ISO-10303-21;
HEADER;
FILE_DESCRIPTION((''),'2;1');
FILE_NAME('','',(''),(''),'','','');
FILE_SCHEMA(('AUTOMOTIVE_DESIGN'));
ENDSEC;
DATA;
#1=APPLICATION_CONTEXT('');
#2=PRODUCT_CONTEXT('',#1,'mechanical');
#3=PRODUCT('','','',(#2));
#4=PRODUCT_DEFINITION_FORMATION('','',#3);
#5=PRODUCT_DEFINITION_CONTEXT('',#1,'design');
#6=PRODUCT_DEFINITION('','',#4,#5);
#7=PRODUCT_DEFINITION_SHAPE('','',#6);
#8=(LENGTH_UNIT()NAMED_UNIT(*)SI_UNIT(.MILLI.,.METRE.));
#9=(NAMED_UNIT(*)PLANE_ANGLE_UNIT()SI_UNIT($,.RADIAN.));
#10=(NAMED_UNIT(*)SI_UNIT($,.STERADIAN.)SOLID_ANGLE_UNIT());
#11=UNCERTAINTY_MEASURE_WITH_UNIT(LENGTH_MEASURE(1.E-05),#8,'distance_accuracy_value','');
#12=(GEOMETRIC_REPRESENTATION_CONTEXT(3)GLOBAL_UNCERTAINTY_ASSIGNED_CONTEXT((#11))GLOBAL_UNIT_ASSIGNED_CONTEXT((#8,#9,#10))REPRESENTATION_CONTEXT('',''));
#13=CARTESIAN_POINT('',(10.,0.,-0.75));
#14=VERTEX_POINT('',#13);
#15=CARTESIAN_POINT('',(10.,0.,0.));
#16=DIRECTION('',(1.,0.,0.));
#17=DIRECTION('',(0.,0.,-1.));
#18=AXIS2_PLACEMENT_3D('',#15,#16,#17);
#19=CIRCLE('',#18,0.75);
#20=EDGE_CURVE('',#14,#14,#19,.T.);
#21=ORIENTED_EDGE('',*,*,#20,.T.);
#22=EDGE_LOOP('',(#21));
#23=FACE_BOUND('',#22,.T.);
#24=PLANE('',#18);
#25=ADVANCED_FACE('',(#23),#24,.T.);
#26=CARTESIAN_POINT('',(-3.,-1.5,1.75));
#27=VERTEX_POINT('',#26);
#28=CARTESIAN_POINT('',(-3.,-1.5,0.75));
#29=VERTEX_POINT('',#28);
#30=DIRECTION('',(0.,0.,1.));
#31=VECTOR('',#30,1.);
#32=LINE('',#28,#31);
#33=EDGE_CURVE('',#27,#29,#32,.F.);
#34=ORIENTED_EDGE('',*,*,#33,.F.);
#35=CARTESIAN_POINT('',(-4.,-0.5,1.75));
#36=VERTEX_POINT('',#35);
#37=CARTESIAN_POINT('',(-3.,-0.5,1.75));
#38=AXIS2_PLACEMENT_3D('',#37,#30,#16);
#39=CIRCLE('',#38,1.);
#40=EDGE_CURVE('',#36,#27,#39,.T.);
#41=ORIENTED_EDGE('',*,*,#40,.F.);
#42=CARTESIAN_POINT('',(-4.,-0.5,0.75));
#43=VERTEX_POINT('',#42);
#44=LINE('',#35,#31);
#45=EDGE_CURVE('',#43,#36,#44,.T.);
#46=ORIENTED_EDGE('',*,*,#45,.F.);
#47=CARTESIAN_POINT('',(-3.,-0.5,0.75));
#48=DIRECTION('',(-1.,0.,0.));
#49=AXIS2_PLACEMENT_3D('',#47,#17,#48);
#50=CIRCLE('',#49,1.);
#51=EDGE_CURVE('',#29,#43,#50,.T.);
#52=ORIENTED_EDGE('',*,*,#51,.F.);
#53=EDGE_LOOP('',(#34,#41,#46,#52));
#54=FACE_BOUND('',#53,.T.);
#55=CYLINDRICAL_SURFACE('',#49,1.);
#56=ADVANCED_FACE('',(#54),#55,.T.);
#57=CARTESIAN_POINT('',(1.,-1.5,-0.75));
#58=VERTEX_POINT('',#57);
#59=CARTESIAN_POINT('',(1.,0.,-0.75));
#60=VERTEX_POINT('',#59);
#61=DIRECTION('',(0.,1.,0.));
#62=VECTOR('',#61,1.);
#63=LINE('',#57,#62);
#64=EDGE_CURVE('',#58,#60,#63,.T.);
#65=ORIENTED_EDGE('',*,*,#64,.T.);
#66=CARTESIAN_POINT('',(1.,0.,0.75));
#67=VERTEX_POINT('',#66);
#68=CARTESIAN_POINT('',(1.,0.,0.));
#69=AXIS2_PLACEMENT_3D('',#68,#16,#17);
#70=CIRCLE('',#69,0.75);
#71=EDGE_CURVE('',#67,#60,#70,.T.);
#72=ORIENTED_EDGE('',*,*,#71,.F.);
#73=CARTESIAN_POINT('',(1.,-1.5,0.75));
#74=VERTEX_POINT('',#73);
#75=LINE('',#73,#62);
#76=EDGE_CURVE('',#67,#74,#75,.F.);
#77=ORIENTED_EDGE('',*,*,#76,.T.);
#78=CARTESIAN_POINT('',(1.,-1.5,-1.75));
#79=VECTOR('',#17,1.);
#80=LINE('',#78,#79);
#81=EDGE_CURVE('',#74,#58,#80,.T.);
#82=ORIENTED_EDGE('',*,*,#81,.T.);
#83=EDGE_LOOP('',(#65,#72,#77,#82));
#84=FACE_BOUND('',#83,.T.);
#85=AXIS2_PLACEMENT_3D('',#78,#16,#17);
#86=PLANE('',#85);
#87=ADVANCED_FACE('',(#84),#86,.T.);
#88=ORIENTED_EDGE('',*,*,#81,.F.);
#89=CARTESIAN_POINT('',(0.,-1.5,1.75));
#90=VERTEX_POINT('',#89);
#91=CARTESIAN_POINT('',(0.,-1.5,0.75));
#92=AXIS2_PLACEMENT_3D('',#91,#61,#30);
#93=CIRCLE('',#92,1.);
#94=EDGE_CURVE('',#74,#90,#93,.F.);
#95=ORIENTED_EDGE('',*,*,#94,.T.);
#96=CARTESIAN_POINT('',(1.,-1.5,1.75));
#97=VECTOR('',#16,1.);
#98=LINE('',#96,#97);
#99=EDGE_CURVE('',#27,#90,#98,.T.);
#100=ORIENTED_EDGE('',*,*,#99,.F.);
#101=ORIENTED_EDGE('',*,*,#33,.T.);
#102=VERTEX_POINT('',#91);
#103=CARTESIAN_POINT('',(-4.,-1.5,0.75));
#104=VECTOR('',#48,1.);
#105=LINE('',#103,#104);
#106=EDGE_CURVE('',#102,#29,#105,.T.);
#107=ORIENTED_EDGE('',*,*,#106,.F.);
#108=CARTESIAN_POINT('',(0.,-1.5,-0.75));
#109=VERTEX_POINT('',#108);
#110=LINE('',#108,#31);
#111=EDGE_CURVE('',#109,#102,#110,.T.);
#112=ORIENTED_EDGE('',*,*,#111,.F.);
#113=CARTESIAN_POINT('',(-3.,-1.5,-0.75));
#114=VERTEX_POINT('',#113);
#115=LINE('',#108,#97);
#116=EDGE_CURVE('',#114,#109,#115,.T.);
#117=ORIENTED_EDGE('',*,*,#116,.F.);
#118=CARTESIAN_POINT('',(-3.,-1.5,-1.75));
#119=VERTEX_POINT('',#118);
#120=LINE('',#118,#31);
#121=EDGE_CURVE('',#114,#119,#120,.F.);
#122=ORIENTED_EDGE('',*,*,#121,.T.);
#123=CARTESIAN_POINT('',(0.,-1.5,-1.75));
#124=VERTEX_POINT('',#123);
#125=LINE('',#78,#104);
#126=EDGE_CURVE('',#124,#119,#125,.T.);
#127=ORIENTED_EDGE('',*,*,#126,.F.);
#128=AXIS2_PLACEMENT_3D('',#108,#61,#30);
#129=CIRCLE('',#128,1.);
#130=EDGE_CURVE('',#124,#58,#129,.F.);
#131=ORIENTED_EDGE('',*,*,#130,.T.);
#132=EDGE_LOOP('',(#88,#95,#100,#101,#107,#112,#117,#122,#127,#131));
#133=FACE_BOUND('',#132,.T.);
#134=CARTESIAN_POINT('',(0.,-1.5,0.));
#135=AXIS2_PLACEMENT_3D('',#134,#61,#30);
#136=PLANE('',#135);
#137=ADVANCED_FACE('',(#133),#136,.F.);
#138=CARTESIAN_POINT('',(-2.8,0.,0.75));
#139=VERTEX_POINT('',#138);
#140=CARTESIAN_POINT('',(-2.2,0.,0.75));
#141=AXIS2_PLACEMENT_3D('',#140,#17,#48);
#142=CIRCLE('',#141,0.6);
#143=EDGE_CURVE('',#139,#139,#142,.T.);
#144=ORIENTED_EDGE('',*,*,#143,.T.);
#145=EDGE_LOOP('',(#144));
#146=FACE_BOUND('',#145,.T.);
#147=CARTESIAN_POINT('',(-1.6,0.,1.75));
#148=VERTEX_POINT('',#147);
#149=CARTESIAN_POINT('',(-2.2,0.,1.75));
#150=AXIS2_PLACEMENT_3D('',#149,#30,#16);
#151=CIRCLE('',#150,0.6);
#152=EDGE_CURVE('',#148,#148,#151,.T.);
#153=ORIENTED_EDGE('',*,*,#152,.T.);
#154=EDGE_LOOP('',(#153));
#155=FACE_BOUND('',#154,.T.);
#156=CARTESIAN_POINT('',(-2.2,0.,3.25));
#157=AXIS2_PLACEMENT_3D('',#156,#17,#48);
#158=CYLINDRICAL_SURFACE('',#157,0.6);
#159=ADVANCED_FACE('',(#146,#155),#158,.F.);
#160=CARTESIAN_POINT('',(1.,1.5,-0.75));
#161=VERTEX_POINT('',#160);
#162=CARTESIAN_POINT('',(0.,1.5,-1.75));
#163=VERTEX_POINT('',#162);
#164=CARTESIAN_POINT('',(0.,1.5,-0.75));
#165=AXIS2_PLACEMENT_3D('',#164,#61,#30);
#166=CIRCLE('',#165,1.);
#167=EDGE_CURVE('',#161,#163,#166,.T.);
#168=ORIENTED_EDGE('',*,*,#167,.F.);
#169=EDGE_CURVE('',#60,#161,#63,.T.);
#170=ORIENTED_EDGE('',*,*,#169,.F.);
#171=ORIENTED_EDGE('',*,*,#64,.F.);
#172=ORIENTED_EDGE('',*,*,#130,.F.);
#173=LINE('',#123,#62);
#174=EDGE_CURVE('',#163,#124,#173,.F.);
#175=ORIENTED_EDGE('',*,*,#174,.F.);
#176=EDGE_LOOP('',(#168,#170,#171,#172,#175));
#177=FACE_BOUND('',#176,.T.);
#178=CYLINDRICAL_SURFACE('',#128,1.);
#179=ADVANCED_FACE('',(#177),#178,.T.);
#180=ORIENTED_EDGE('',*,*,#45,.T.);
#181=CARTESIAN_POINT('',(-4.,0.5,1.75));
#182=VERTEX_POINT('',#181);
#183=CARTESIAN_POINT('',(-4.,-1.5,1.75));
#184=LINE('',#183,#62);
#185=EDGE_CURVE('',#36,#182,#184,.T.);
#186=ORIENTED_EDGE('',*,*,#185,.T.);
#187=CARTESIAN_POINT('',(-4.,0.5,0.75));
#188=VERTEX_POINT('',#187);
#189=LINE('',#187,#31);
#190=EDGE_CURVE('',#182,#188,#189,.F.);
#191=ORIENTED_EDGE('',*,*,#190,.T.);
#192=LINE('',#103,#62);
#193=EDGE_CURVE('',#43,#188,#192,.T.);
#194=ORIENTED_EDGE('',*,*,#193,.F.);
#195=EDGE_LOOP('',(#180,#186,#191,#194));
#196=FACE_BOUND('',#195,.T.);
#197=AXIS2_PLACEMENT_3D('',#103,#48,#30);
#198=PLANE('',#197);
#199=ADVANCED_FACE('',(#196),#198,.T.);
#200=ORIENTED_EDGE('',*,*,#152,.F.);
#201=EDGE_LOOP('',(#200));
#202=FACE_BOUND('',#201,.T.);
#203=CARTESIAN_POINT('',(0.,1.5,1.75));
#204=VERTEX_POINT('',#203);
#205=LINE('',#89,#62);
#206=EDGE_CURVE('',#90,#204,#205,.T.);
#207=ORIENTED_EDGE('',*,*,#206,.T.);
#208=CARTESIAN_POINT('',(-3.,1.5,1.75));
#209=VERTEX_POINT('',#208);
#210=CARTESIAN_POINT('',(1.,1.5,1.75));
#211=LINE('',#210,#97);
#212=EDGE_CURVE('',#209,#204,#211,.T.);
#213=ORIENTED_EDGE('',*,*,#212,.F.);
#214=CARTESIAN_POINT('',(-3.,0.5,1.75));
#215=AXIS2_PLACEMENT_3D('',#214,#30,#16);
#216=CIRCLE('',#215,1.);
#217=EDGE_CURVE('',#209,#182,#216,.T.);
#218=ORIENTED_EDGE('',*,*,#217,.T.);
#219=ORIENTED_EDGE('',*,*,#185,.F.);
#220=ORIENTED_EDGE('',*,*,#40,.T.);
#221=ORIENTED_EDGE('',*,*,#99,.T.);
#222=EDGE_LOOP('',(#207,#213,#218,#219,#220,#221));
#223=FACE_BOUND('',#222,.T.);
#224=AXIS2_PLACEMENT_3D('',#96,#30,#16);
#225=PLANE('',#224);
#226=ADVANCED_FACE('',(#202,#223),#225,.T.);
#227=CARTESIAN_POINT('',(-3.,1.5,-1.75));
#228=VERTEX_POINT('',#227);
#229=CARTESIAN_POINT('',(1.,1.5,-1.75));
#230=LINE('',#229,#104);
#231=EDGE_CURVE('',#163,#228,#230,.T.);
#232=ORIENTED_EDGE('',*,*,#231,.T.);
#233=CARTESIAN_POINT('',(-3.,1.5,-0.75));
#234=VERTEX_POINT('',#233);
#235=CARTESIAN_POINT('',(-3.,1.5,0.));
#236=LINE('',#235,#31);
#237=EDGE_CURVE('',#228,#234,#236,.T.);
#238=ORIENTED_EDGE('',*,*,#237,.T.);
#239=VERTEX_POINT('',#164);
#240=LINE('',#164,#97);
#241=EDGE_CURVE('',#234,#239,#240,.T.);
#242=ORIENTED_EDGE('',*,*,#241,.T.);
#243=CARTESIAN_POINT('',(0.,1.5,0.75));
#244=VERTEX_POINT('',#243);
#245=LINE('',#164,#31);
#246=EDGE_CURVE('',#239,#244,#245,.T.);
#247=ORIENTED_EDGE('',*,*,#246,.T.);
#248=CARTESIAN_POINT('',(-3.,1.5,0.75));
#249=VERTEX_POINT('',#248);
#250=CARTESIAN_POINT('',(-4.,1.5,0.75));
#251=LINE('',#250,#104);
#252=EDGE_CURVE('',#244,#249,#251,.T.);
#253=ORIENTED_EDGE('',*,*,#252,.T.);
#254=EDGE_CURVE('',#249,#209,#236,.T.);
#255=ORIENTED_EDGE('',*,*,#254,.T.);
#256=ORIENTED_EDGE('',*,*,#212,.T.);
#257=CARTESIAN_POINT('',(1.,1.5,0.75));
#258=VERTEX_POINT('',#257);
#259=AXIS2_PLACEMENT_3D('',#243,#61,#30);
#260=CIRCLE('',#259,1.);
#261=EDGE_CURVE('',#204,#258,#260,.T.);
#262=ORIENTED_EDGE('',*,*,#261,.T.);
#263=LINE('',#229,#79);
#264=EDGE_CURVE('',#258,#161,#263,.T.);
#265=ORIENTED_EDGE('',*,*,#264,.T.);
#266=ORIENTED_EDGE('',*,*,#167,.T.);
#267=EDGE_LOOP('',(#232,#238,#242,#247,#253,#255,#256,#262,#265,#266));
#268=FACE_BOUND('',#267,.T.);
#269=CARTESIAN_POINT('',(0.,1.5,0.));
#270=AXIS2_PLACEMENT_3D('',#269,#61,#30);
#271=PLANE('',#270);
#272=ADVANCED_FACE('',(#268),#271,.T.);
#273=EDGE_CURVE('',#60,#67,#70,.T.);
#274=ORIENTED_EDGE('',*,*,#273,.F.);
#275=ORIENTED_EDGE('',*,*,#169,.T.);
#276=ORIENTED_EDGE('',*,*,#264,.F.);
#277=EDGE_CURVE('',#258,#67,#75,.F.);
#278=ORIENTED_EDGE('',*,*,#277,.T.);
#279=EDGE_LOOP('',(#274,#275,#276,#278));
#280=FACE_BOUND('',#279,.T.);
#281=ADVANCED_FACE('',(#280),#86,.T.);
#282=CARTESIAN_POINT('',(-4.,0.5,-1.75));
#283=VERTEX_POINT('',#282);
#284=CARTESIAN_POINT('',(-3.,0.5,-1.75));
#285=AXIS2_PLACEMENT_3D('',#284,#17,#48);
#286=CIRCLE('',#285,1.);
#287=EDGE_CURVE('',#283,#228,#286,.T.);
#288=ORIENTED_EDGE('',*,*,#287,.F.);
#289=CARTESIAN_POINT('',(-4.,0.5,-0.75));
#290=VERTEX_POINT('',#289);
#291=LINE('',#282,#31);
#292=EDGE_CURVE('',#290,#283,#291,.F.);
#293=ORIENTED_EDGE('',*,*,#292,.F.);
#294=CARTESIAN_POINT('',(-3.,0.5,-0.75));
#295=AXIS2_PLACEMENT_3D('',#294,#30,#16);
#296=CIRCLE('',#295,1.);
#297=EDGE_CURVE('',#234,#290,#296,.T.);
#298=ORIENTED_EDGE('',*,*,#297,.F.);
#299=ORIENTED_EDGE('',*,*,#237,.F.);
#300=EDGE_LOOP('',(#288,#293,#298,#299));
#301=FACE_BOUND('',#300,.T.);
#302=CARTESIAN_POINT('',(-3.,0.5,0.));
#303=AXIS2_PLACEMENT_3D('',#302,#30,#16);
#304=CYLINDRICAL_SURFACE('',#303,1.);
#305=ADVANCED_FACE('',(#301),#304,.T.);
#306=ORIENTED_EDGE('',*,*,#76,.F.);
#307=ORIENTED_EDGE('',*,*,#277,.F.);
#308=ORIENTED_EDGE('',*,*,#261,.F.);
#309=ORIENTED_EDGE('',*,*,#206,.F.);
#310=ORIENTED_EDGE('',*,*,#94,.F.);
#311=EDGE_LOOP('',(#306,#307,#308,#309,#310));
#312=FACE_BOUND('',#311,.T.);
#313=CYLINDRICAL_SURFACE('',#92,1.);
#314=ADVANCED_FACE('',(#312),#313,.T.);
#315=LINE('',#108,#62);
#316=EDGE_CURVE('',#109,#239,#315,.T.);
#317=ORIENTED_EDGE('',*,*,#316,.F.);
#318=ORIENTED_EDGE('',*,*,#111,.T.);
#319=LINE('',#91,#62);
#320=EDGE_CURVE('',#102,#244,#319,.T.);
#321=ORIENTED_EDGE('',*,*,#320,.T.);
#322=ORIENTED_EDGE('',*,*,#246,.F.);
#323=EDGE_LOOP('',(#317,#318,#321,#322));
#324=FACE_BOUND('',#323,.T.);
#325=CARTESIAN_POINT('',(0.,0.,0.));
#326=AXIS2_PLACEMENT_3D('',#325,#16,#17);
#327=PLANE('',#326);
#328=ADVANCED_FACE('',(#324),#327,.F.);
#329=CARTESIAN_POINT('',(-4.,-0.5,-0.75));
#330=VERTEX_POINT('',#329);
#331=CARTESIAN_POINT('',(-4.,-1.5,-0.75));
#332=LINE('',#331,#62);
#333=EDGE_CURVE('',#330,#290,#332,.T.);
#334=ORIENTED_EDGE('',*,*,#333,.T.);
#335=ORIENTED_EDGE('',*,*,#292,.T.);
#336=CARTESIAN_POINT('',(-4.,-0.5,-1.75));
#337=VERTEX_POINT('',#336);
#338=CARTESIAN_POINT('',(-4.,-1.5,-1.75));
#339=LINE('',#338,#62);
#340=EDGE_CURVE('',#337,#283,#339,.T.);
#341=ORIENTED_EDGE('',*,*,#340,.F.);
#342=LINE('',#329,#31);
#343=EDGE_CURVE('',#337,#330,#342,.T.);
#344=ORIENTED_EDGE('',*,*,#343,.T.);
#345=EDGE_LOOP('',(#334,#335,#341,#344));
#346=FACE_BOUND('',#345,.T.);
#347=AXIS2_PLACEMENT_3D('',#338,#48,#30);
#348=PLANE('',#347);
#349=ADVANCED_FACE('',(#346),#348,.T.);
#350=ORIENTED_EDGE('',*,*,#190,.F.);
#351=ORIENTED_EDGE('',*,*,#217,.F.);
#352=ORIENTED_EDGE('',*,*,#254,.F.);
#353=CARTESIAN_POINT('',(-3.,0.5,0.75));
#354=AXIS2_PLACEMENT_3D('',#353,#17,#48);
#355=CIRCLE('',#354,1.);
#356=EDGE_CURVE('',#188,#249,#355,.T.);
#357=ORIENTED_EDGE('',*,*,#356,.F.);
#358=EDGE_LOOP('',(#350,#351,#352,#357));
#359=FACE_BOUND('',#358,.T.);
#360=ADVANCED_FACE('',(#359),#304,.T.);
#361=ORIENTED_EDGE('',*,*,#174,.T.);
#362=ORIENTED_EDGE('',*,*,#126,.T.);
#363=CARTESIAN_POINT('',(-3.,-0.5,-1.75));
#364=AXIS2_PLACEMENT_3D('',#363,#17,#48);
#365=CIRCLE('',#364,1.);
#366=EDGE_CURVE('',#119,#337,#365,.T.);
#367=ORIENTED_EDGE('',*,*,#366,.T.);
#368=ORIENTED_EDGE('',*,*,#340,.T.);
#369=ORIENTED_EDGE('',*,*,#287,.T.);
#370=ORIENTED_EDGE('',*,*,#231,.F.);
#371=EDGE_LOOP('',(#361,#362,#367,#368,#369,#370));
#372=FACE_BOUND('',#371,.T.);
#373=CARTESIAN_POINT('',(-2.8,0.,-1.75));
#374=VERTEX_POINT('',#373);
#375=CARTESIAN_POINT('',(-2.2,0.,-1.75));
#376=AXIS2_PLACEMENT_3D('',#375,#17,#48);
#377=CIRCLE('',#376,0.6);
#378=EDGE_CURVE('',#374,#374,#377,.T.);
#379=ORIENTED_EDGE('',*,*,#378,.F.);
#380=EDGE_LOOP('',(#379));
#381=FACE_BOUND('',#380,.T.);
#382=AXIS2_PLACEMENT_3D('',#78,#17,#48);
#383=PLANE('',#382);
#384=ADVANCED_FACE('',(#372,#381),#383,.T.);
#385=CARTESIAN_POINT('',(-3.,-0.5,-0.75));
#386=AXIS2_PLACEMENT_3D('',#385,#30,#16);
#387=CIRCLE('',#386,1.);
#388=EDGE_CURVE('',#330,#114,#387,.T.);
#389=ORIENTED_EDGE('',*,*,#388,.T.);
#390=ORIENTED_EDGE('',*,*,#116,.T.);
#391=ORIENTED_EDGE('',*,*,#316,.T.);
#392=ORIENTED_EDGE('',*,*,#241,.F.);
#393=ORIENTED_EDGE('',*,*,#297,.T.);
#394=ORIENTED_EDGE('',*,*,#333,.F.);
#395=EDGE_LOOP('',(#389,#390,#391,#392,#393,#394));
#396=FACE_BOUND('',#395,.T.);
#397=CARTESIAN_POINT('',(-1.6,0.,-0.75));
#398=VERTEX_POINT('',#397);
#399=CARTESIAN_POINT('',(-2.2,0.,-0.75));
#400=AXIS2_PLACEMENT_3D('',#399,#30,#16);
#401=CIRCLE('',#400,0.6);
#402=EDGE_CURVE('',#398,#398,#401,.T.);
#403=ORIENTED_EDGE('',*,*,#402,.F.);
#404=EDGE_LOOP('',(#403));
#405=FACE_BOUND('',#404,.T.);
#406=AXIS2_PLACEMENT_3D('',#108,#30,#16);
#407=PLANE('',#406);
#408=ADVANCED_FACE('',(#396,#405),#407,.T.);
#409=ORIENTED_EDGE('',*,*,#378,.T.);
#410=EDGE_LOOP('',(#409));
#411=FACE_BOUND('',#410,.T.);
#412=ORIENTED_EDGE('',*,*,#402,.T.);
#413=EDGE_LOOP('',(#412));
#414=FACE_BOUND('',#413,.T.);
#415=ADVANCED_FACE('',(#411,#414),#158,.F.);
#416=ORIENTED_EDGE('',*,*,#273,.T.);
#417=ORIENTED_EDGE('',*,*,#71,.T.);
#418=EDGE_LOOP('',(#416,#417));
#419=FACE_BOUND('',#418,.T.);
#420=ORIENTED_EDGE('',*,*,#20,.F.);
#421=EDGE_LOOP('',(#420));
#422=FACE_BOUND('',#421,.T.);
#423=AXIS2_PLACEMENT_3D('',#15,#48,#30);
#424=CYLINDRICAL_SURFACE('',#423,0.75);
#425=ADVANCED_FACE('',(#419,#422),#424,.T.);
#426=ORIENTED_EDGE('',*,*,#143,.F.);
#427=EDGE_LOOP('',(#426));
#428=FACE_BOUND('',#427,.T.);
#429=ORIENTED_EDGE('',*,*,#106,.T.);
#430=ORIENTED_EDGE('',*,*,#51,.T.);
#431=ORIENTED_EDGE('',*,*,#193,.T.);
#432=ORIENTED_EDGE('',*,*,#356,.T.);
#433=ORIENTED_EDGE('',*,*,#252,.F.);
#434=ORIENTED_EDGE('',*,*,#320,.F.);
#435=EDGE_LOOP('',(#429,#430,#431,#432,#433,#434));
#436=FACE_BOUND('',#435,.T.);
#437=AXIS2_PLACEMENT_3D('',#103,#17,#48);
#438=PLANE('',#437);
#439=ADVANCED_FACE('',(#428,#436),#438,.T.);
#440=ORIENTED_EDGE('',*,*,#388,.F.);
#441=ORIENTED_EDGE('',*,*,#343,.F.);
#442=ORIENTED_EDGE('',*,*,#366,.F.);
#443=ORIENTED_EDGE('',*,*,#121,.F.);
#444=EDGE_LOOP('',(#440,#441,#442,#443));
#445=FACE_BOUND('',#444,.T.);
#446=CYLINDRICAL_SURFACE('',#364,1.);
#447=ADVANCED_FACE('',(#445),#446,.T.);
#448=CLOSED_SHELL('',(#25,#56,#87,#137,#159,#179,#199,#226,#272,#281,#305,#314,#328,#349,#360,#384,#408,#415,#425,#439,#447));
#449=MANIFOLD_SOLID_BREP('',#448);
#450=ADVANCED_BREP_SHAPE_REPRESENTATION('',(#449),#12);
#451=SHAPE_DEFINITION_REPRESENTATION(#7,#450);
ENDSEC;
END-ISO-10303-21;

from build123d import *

# Parameters (mm, degrees)
SKETCH1_R                = 0.75
BOSS_EXTRUDE1_DEPTH      = 10
BOSS_EXTRUDE2_DEPTH      = 1.5
BOSS_EXTRUDE2_DEPTH_BACK = 1.5
FILLET1_R                = 1
SKETCH3_R                = 0.6
CUT_EXTRUDE1_DEPTH       = 5


with BuildPart() as part:
    # Sketch1 → Boss-Extrude1 (new body)
    with BuildSketch(Plane(origin=(0, 0, 0), x_dir=(0, 0, -1), z_dir=(1, 0, 0))):
        Circle(SKETCH1_R)
    extrude(amount=BOSS_EXTRUDE1_DEPTH)

    # Sketch2 → Boss-Extrude2 (add, two sides: drawn at the far end of the back side and taken through both)
    with BuildSketch(Plane(origin=(0, 0, 0), x_dir=(1, 0, 0), z_dir=(0, 1, 0)).offset(-BOSS_EXTRUDE2_DEPTH_BACK)):
        Polygon((1, 1.75), (1, -1.75), (-4, -1.75), (-4, -0.75), (0, -0.75), (0, 0.75), (-4, 0.75), (-4, 1.75), align=None)
    extrude(amount=BOSS_EXTRUDE2_DEPTH + BOSS_EXTRUDE2_DEPTH_BACK)

    # Fillet1
    fillet1_edges = [part.edges().sort_by_distance(p)[0] for p in [
        (-4, 1.5, 1.25),
        (-4, 1.5, -1.25),
        (-4, -1.5, -1.25),
        (1, 0, -1.75),
        (1, 0, 1.75),
        (-4, -1.5, 1.25),
    ]]
    fillet(fillet1_edges, radius=FILLET1_R - 0.0001)  # a hair under: the kernel refuses the full size

    # Sketch3 → Cut-Extrude1 (cut)
    with BuildSketch(Plane(origin=(0, 0, -1.75), x_dir=(-1, 0, 0), z_dir=(0, 0, -1))):
        with Locations((2.2, 0)):
            Circle(SKETCH3_R)
    extrude(amount=-CUT_EXTRUDE1_DEPTH, mode=Mode.SUBTRACT)


solid = part.part
